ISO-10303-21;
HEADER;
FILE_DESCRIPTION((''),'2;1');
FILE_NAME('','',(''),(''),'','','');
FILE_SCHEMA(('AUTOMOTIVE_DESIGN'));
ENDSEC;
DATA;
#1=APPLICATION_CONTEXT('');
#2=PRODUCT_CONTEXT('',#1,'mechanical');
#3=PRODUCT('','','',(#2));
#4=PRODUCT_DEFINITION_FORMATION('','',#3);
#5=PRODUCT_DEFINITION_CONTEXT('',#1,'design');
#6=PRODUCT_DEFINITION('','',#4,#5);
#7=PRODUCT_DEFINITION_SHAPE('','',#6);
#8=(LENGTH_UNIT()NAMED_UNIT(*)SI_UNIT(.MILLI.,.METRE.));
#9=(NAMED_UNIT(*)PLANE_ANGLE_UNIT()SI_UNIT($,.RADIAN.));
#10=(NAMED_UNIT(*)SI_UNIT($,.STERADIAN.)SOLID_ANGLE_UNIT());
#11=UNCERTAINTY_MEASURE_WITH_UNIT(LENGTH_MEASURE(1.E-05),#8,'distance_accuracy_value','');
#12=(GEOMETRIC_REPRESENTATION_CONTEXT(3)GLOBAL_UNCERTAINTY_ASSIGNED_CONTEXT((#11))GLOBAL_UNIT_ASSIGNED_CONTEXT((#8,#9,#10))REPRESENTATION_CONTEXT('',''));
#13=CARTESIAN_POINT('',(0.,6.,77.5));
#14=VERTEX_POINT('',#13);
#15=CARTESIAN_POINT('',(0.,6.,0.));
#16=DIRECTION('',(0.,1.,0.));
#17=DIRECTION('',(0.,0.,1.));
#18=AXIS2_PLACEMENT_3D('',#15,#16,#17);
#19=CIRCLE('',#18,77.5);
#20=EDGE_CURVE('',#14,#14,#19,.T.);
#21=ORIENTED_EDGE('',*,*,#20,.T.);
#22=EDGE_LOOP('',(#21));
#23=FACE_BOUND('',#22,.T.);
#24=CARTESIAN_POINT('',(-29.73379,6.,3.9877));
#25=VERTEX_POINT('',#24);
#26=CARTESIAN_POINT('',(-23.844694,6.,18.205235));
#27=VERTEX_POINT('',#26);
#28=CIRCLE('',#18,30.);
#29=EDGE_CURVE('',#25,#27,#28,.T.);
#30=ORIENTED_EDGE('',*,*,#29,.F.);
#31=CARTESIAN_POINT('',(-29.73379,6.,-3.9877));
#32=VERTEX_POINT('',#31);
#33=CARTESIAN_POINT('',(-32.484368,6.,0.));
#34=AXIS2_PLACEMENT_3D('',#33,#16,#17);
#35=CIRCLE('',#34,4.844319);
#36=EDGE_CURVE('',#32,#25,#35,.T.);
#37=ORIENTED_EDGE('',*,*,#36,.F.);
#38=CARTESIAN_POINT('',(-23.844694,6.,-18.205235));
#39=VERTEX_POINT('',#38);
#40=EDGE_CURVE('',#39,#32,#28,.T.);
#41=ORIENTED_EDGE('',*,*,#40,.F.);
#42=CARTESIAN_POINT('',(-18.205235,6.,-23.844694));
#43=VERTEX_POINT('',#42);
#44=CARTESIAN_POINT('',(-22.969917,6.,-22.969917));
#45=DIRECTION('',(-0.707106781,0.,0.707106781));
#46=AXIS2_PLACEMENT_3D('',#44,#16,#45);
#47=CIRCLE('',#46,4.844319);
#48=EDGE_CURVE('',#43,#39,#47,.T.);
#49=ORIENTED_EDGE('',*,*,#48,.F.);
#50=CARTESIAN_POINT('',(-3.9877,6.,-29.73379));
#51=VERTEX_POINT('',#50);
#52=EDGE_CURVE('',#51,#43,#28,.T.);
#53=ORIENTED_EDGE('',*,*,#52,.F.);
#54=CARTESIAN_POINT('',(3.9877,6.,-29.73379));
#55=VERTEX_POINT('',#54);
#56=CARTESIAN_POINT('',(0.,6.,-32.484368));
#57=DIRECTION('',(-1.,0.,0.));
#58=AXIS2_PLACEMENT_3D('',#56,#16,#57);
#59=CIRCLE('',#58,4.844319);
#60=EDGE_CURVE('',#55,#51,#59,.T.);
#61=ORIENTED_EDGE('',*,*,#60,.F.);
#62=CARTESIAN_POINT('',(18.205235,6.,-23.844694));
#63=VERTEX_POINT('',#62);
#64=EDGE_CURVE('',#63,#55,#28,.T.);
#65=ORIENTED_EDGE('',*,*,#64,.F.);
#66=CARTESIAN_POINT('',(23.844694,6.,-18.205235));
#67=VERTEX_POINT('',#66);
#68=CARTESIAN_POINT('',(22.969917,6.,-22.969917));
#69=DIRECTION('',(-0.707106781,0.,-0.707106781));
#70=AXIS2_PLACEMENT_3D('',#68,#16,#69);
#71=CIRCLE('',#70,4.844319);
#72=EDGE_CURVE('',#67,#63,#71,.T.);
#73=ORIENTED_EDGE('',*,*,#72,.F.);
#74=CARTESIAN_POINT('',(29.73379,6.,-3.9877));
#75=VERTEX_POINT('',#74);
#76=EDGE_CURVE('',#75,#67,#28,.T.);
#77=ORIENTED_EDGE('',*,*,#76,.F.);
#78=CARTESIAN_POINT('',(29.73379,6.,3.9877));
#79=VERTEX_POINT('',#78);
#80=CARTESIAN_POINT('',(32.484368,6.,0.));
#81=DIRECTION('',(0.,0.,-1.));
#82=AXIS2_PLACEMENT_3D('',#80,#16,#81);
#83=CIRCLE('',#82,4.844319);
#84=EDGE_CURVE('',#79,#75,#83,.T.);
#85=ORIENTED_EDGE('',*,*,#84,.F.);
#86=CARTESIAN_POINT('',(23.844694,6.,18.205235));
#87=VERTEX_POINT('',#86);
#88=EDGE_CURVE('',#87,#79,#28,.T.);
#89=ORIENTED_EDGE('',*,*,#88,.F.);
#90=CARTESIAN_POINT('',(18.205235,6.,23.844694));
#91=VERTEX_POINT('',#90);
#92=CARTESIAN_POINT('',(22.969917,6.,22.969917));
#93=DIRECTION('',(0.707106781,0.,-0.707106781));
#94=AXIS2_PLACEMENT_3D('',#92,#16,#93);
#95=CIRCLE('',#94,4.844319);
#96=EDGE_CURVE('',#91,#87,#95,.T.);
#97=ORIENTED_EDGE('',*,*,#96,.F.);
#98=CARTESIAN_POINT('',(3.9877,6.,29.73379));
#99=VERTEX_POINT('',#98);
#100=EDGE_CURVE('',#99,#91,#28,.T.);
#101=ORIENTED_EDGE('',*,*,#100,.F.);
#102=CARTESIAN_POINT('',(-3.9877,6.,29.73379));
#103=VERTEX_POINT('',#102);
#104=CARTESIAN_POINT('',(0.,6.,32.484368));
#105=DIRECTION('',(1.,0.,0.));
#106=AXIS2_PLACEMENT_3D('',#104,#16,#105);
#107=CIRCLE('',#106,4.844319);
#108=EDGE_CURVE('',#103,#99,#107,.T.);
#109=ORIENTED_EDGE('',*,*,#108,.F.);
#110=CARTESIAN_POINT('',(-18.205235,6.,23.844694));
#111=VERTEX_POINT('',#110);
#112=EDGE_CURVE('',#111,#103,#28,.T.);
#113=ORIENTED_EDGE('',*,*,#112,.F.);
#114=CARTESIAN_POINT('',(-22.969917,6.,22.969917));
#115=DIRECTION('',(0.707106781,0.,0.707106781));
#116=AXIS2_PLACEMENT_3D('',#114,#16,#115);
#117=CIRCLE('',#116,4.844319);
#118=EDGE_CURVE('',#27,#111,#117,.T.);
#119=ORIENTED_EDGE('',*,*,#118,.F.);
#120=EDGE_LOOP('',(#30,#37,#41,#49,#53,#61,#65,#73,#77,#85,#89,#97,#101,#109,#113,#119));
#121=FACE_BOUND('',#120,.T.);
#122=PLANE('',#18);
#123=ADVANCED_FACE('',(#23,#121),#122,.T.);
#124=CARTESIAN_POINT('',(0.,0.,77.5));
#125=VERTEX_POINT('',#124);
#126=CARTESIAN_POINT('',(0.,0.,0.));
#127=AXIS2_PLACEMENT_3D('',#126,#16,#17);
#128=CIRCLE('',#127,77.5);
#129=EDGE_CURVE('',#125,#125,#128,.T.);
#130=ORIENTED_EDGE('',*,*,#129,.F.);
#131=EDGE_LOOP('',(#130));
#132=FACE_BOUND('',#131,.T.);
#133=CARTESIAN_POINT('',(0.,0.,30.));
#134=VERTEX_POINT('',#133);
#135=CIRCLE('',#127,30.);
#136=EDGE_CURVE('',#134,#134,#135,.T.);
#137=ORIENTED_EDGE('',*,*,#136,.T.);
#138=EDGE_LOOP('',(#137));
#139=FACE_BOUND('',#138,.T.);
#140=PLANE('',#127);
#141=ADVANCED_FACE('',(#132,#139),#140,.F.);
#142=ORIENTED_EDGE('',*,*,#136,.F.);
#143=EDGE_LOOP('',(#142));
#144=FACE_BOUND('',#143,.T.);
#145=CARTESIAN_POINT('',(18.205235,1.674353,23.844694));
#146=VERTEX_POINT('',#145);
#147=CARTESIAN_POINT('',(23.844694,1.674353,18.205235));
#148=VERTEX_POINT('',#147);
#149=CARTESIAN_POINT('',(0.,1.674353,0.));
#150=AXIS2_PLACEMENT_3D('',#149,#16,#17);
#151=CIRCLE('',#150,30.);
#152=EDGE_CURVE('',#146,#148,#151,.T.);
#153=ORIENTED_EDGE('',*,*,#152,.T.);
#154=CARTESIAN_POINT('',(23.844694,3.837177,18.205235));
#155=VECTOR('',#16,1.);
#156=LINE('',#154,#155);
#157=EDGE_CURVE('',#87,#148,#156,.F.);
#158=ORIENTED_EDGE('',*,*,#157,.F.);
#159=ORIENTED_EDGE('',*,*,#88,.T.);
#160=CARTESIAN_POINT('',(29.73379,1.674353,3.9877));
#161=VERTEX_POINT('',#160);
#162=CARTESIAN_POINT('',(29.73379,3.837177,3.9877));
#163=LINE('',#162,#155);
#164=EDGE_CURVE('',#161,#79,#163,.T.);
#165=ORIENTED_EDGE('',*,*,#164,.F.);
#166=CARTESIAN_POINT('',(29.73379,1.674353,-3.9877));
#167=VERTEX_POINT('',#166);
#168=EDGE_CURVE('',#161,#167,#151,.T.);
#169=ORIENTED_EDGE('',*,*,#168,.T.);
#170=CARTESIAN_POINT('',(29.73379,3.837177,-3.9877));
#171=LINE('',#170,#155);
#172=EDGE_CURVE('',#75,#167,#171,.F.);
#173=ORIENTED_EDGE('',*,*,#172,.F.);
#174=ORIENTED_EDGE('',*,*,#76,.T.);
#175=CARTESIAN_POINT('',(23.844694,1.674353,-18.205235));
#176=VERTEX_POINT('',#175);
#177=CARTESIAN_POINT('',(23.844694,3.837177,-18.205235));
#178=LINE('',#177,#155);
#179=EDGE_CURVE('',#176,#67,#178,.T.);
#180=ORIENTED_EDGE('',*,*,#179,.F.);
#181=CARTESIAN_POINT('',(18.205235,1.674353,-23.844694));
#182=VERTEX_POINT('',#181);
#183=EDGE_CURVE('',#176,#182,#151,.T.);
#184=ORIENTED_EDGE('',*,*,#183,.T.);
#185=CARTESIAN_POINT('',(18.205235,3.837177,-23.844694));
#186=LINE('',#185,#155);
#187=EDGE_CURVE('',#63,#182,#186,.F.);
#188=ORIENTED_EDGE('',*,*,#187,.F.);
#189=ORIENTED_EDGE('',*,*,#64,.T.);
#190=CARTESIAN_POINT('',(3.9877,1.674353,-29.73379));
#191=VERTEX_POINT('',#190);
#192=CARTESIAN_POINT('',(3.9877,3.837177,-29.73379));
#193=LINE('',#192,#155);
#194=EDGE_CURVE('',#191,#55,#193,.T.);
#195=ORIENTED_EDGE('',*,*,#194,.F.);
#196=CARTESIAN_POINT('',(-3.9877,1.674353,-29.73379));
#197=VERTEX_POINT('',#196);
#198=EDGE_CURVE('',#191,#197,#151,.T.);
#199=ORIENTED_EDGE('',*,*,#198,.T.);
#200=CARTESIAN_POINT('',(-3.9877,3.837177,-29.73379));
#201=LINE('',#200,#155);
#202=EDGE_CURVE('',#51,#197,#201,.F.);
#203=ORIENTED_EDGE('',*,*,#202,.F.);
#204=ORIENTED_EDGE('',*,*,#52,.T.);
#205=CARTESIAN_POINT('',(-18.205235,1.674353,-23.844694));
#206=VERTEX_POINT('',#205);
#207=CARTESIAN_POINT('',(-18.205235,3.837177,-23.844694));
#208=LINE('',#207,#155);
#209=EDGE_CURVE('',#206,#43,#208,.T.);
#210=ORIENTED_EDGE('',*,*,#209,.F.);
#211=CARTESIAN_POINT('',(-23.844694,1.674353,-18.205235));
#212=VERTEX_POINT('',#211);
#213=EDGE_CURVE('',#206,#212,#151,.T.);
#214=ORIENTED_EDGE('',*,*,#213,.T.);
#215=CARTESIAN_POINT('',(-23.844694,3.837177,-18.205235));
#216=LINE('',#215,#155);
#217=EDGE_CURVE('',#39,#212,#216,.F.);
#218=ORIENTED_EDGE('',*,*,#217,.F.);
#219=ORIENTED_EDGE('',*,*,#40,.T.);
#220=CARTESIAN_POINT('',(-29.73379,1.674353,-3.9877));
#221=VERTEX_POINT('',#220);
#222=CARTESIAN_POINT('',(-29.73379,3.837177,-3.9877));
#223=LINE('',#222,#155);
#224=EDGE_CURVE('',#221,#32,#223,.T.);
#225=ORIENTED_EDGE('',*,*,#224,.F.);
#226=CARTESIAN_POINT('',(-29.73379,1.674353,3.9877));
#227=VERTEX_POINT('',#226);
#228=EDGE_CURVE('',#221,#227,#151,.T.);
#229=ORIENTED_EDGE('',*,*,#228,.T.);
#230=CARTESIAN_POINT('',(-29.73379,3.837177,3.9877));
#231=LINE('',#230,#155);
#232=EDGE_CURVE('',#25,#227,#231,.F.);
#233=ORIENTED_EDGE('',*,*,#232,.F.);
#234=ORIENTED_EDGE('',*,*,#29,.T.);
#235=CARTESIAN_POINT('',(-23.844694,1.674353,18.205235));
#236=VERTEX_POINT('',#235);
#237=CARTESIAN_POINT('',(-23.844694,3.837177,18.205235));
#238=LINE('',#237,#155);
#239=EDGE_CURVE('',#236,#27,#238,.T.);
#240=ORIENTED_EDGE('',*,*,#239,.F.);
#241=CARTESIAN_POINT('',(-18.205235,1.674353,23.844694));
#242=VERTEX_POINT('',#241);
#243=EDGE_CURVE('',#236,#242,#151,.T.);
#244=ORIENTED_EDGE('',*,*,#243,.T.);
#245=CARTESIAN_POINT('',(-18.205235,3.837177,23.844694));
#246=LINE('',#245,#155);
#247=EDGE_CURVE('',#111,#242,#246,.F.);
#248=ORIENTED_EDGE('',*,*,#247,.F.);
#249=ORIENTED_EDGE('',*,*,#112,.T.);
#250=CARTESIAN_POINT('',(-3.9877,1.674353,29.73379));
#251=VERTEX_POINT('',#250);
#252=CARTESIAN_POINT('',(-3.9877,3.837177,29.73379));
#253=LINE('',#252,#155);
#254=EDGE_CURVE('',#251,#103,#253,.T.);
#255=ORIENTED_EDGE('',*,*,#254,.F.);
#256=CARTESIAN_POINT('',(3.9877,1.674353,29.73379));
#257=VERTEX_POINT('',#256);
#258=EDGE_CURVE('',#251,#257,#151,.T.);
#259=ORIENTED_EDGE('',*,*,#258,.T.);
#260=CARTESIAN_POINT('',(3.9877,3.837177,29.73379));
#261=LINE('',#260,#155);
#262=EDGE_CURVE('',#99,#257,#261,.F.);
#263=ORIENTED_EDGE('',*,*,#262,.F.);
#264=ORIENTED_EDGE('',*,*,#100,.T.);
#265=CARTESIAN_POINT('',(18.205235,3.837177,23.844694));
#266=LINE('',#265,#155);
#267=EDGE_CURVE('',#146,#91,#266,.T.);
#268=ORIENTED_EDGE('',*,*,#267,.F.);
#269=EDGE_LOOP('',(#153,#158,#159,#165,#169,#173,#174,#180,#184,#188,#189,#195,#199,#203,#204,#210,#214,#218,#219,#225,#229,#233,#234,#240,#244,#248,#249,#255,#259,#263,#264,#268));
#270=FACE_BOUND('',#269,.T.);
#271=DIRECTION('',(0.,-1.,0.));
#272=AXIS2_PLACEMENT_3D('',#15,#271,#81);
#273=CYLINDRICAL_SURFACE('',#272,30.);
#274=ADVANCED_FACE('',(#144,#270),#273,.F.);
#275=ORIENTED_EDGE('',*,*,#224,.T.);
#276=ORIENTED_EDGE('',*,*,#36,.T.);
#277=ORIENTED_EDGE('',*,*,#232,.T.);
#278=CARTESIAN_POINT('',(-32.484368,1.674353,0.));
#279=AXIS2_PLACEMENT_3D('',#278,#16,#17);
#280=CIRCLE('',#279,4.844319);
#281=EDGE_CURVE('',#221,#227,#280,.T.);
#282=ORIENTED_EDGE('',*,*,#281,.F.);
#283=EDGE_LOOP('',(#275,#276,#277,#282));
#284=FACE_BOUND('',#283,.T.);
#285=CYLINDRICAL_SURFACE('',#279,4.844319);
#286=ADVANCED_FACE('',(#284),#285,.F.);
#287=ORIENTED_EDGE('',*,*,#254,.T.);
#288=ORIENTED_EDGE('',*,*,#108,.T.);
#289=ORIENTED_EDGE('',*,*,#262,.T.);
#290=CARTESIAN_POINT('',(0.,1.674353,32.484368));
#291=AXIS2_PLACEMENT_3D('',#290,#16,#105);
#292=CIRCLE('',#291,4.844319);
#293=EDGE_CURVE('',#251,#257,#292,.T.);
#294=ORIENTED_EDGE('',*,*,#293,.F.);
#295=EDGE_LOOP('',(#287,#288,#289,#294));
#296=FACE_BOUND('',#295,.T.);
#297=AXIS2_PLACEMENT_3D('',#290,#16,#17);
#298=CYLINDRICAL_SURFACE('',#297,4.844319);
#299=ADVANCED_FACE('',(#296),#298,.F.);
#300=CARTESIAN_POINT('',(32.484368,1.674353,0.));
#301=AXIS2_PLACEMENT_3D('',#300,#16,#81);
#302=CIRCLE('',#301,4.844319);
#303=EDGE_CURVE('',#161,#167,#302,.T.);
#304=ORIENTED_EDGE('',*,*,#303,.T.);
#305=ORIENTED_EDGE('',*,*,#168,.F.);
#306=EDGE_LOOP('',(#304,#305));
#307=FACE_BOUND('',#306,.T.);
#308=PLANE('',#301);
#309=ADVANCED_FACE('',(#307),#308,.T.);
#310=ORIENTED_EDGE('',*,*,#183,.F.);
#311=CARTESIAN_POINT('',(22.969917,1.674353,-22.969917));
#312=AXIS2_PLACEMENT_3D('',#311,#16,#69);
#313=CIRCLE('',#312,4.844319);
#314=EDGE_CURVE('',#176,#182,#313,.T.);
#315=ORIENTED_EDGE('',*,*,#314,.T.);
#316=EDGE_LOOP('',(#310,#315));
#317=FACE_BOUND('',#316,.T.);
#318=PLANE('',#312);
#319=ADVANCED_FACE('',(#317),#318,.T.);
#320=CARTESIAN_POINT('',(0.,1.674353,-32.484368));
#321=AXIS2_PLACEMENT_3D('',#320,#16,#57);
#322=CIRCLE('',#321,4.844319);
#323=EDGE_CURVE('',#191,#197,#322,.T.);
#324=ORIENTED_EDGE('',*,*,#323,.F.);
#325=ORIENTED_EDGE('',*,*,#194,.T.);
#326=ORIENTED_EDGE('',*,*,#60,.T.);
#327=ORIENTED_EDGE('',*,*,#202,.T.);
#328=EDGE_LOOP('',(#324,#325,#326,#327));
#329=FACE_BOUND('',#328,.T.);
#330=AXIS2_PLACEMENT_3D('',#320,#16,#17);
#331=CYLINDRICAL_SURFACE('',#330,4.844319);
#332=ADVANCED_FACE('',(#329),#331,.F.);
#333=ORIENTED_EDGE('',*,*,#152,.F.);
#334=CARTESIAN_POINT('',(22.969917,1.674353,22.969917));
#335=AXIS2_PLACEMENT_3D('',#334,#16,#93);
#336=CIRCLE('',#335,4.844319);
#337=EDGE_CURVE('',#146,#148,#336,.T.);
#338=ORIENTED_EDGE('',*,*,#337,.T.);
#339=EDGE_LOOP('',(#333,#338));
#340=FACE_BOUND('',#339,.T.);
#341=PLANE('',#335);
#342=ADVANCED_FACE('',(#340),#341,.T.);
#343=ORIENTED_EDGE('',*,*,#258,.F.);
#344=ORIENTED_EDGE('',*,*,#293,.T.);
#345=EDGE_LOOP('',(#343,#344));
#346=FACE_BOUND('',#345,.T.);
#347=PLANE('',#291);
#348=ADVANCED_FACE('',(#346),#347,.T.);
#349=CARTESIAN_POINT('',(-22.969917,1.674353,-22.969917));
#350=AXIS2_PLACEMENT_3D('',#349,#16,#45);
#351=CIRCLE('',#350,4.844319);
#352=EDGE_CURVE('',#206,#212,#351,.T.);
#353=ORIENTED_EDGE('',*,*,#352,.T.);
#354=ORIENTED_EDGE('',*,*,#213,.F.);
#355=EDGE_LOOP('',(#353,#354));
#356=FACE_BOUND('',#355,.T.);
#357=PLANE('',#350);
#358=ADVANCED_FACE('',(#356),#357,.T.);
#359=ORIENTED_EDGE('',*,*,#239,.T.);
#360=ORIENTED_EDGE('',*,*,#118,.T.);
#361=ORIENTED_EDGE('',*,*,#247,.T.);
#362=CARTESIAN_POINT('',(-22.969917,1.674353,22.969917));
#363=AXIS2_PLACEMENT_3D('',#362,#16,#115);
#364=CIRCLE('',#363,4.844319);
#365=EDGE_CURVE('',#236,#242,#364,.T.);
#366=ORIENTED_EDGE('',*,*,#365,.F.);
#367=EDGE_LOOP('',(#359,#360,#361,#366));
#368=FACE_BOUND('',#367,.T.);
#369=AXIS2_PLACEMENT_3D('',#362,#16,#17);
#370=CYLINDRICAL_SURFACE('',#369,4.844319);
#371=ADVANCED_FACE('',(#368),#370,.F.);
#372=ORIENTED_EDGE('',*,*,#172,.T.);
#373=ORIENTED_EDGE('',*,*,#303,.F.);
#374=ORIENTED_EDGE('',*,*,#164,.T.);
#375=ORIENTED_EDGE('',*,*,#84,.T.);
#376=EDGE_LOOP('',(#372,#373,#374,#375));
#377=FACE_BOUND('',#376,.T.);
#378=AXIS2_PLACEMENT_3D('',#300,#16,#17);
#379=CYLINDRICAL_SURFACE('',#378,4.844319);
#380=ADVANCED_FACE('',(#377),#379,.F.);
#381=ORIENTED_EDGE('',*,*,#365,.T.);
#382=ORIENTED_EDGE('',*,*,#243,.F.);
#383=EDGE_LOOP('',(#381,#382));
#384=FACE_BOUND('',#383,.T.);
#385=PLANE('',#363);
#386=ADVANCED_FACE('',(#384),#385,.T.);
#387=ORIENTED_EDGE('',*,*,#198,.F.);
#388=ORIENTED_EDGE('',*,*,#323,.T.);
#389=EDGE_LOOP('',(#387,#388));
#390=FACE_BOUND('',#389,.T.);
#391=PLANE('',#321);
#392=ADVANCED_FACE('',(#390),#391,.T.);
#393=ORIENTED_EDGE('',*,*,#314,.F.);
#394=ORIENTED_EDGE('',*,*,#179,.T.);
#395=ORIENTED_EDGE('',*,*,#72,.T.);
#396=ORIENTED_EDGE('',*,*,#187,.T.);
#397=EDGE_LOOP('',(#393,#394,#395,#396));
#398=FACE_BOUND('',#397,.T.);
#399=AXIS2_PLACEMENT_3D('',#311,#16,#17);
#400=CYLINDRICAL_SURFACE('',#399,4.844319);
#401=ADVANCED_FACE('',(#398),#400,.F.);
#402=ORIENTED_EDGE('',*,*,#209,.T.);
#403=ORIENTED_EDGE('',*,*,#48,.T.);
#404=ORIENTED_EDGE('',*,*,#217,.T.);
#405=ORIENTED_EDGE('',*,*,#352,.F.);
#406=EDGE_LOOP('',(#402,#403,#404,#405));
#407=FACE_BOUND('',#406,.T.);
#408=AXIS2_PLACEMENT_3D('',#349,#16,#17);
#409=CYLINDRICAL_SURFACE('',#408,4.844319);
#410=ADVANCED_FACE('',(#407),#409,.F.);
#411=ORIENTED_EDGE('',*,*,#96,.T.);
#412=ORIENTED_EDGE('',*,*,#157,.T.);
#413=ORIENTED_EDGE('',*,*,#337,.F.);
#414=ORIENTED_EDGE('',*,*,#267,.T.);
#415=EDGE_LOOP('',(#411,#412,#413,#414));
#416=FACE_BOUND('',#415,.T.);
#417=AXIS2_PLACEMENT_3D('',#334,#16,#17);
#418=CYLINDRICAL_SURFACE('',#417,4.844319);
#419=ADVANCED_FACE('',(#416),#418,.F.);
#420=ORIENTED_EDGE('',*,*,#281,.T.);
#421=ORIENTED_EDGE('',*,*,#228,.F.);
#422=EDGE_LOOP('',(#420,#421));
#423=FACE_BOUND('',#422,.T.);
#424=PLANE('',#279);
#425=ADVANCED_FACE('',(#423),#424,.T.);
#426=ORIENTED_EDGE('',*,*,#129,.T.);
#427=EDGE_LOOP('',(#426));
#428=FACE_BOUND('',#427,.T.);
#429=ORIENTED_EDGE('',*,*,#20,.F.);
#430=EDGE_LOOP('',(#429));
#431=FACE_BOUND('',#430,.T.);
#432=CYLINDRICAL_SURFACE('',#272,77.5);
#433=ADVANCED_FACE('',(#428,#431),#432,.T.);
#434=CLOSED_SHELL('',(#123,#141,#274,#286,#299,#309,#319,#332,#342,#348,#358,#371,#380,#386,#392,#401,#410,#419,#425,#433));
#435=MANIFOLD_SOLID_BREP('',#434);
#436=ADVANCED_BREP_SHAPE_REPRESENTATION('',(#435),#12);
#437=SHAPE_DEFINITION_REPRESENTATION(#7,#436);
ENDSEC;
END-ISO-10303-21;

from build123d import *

# Parameters (mm, degrees)
SKETCH1_R           = 77.5
BOSS_EXTRUDE1_DEPTH = 6
SKETCH2_R           = 30
CUT_EXTRUDE1_DEPTH  = 110.765659475
SKETCH3_R           = 4.844319101
CUT_EXTRUDE2_DEPTH  = 4.325646513
CIRPATTERN1_COUNT   = 8


with BuildPart() as part:
    # Sketch1 → Boss-Extrude1 (new body)
    with BuildSketch(Plane(origin=(0, 0, 0), x_dir=(1, 0, 0), z_dir=(0, 1, 0))):
        Circle(SKETCH1_R)
    extrude(amount=BOSS_EXTRUDE1_DEPTH)

    # Sketch2 → Cut-Extrude1 (cut, through all)
    with BuildSketch(Plane(origin=(0, 0, 0), x_dir=(1, 0, 0), z_dir=(0, 1, 0))):
        Circle(SKETCH2_R)
    extrude(amount=CUT_EXTRUDE1_DEPTH, mode=Mode.SUBTRACT)

    # Sketch3 → Cut-Extrude2 (cut)
    with BuildSketch(Plane(origin=(0, 6, 0), x_dir=(1, 0, 0), z_dir=(0, 1, 0))):
        with Locations((-32.484367681, 0)):
            Circle(SKETCH3_R)
    cut_extrude2 = extrude(amount=-CUT_EXTRUDE2_DEPTH, mode=Mode.SUBTRACT)

    # CirPattern1: Cut-Extrude2 ×8 about axis
    cirpattern1_axis = Axis((0, 0, 0), (0, 1, 0))
    for i in range(1, CIRPATTERN1_COUNT):
        add(cut_extrude2.rotate(cirpattern1_axis, i * 360 / CIRPATTERN1_COUNT), mode=Mode.SUBTRACT)


solid = part.part
